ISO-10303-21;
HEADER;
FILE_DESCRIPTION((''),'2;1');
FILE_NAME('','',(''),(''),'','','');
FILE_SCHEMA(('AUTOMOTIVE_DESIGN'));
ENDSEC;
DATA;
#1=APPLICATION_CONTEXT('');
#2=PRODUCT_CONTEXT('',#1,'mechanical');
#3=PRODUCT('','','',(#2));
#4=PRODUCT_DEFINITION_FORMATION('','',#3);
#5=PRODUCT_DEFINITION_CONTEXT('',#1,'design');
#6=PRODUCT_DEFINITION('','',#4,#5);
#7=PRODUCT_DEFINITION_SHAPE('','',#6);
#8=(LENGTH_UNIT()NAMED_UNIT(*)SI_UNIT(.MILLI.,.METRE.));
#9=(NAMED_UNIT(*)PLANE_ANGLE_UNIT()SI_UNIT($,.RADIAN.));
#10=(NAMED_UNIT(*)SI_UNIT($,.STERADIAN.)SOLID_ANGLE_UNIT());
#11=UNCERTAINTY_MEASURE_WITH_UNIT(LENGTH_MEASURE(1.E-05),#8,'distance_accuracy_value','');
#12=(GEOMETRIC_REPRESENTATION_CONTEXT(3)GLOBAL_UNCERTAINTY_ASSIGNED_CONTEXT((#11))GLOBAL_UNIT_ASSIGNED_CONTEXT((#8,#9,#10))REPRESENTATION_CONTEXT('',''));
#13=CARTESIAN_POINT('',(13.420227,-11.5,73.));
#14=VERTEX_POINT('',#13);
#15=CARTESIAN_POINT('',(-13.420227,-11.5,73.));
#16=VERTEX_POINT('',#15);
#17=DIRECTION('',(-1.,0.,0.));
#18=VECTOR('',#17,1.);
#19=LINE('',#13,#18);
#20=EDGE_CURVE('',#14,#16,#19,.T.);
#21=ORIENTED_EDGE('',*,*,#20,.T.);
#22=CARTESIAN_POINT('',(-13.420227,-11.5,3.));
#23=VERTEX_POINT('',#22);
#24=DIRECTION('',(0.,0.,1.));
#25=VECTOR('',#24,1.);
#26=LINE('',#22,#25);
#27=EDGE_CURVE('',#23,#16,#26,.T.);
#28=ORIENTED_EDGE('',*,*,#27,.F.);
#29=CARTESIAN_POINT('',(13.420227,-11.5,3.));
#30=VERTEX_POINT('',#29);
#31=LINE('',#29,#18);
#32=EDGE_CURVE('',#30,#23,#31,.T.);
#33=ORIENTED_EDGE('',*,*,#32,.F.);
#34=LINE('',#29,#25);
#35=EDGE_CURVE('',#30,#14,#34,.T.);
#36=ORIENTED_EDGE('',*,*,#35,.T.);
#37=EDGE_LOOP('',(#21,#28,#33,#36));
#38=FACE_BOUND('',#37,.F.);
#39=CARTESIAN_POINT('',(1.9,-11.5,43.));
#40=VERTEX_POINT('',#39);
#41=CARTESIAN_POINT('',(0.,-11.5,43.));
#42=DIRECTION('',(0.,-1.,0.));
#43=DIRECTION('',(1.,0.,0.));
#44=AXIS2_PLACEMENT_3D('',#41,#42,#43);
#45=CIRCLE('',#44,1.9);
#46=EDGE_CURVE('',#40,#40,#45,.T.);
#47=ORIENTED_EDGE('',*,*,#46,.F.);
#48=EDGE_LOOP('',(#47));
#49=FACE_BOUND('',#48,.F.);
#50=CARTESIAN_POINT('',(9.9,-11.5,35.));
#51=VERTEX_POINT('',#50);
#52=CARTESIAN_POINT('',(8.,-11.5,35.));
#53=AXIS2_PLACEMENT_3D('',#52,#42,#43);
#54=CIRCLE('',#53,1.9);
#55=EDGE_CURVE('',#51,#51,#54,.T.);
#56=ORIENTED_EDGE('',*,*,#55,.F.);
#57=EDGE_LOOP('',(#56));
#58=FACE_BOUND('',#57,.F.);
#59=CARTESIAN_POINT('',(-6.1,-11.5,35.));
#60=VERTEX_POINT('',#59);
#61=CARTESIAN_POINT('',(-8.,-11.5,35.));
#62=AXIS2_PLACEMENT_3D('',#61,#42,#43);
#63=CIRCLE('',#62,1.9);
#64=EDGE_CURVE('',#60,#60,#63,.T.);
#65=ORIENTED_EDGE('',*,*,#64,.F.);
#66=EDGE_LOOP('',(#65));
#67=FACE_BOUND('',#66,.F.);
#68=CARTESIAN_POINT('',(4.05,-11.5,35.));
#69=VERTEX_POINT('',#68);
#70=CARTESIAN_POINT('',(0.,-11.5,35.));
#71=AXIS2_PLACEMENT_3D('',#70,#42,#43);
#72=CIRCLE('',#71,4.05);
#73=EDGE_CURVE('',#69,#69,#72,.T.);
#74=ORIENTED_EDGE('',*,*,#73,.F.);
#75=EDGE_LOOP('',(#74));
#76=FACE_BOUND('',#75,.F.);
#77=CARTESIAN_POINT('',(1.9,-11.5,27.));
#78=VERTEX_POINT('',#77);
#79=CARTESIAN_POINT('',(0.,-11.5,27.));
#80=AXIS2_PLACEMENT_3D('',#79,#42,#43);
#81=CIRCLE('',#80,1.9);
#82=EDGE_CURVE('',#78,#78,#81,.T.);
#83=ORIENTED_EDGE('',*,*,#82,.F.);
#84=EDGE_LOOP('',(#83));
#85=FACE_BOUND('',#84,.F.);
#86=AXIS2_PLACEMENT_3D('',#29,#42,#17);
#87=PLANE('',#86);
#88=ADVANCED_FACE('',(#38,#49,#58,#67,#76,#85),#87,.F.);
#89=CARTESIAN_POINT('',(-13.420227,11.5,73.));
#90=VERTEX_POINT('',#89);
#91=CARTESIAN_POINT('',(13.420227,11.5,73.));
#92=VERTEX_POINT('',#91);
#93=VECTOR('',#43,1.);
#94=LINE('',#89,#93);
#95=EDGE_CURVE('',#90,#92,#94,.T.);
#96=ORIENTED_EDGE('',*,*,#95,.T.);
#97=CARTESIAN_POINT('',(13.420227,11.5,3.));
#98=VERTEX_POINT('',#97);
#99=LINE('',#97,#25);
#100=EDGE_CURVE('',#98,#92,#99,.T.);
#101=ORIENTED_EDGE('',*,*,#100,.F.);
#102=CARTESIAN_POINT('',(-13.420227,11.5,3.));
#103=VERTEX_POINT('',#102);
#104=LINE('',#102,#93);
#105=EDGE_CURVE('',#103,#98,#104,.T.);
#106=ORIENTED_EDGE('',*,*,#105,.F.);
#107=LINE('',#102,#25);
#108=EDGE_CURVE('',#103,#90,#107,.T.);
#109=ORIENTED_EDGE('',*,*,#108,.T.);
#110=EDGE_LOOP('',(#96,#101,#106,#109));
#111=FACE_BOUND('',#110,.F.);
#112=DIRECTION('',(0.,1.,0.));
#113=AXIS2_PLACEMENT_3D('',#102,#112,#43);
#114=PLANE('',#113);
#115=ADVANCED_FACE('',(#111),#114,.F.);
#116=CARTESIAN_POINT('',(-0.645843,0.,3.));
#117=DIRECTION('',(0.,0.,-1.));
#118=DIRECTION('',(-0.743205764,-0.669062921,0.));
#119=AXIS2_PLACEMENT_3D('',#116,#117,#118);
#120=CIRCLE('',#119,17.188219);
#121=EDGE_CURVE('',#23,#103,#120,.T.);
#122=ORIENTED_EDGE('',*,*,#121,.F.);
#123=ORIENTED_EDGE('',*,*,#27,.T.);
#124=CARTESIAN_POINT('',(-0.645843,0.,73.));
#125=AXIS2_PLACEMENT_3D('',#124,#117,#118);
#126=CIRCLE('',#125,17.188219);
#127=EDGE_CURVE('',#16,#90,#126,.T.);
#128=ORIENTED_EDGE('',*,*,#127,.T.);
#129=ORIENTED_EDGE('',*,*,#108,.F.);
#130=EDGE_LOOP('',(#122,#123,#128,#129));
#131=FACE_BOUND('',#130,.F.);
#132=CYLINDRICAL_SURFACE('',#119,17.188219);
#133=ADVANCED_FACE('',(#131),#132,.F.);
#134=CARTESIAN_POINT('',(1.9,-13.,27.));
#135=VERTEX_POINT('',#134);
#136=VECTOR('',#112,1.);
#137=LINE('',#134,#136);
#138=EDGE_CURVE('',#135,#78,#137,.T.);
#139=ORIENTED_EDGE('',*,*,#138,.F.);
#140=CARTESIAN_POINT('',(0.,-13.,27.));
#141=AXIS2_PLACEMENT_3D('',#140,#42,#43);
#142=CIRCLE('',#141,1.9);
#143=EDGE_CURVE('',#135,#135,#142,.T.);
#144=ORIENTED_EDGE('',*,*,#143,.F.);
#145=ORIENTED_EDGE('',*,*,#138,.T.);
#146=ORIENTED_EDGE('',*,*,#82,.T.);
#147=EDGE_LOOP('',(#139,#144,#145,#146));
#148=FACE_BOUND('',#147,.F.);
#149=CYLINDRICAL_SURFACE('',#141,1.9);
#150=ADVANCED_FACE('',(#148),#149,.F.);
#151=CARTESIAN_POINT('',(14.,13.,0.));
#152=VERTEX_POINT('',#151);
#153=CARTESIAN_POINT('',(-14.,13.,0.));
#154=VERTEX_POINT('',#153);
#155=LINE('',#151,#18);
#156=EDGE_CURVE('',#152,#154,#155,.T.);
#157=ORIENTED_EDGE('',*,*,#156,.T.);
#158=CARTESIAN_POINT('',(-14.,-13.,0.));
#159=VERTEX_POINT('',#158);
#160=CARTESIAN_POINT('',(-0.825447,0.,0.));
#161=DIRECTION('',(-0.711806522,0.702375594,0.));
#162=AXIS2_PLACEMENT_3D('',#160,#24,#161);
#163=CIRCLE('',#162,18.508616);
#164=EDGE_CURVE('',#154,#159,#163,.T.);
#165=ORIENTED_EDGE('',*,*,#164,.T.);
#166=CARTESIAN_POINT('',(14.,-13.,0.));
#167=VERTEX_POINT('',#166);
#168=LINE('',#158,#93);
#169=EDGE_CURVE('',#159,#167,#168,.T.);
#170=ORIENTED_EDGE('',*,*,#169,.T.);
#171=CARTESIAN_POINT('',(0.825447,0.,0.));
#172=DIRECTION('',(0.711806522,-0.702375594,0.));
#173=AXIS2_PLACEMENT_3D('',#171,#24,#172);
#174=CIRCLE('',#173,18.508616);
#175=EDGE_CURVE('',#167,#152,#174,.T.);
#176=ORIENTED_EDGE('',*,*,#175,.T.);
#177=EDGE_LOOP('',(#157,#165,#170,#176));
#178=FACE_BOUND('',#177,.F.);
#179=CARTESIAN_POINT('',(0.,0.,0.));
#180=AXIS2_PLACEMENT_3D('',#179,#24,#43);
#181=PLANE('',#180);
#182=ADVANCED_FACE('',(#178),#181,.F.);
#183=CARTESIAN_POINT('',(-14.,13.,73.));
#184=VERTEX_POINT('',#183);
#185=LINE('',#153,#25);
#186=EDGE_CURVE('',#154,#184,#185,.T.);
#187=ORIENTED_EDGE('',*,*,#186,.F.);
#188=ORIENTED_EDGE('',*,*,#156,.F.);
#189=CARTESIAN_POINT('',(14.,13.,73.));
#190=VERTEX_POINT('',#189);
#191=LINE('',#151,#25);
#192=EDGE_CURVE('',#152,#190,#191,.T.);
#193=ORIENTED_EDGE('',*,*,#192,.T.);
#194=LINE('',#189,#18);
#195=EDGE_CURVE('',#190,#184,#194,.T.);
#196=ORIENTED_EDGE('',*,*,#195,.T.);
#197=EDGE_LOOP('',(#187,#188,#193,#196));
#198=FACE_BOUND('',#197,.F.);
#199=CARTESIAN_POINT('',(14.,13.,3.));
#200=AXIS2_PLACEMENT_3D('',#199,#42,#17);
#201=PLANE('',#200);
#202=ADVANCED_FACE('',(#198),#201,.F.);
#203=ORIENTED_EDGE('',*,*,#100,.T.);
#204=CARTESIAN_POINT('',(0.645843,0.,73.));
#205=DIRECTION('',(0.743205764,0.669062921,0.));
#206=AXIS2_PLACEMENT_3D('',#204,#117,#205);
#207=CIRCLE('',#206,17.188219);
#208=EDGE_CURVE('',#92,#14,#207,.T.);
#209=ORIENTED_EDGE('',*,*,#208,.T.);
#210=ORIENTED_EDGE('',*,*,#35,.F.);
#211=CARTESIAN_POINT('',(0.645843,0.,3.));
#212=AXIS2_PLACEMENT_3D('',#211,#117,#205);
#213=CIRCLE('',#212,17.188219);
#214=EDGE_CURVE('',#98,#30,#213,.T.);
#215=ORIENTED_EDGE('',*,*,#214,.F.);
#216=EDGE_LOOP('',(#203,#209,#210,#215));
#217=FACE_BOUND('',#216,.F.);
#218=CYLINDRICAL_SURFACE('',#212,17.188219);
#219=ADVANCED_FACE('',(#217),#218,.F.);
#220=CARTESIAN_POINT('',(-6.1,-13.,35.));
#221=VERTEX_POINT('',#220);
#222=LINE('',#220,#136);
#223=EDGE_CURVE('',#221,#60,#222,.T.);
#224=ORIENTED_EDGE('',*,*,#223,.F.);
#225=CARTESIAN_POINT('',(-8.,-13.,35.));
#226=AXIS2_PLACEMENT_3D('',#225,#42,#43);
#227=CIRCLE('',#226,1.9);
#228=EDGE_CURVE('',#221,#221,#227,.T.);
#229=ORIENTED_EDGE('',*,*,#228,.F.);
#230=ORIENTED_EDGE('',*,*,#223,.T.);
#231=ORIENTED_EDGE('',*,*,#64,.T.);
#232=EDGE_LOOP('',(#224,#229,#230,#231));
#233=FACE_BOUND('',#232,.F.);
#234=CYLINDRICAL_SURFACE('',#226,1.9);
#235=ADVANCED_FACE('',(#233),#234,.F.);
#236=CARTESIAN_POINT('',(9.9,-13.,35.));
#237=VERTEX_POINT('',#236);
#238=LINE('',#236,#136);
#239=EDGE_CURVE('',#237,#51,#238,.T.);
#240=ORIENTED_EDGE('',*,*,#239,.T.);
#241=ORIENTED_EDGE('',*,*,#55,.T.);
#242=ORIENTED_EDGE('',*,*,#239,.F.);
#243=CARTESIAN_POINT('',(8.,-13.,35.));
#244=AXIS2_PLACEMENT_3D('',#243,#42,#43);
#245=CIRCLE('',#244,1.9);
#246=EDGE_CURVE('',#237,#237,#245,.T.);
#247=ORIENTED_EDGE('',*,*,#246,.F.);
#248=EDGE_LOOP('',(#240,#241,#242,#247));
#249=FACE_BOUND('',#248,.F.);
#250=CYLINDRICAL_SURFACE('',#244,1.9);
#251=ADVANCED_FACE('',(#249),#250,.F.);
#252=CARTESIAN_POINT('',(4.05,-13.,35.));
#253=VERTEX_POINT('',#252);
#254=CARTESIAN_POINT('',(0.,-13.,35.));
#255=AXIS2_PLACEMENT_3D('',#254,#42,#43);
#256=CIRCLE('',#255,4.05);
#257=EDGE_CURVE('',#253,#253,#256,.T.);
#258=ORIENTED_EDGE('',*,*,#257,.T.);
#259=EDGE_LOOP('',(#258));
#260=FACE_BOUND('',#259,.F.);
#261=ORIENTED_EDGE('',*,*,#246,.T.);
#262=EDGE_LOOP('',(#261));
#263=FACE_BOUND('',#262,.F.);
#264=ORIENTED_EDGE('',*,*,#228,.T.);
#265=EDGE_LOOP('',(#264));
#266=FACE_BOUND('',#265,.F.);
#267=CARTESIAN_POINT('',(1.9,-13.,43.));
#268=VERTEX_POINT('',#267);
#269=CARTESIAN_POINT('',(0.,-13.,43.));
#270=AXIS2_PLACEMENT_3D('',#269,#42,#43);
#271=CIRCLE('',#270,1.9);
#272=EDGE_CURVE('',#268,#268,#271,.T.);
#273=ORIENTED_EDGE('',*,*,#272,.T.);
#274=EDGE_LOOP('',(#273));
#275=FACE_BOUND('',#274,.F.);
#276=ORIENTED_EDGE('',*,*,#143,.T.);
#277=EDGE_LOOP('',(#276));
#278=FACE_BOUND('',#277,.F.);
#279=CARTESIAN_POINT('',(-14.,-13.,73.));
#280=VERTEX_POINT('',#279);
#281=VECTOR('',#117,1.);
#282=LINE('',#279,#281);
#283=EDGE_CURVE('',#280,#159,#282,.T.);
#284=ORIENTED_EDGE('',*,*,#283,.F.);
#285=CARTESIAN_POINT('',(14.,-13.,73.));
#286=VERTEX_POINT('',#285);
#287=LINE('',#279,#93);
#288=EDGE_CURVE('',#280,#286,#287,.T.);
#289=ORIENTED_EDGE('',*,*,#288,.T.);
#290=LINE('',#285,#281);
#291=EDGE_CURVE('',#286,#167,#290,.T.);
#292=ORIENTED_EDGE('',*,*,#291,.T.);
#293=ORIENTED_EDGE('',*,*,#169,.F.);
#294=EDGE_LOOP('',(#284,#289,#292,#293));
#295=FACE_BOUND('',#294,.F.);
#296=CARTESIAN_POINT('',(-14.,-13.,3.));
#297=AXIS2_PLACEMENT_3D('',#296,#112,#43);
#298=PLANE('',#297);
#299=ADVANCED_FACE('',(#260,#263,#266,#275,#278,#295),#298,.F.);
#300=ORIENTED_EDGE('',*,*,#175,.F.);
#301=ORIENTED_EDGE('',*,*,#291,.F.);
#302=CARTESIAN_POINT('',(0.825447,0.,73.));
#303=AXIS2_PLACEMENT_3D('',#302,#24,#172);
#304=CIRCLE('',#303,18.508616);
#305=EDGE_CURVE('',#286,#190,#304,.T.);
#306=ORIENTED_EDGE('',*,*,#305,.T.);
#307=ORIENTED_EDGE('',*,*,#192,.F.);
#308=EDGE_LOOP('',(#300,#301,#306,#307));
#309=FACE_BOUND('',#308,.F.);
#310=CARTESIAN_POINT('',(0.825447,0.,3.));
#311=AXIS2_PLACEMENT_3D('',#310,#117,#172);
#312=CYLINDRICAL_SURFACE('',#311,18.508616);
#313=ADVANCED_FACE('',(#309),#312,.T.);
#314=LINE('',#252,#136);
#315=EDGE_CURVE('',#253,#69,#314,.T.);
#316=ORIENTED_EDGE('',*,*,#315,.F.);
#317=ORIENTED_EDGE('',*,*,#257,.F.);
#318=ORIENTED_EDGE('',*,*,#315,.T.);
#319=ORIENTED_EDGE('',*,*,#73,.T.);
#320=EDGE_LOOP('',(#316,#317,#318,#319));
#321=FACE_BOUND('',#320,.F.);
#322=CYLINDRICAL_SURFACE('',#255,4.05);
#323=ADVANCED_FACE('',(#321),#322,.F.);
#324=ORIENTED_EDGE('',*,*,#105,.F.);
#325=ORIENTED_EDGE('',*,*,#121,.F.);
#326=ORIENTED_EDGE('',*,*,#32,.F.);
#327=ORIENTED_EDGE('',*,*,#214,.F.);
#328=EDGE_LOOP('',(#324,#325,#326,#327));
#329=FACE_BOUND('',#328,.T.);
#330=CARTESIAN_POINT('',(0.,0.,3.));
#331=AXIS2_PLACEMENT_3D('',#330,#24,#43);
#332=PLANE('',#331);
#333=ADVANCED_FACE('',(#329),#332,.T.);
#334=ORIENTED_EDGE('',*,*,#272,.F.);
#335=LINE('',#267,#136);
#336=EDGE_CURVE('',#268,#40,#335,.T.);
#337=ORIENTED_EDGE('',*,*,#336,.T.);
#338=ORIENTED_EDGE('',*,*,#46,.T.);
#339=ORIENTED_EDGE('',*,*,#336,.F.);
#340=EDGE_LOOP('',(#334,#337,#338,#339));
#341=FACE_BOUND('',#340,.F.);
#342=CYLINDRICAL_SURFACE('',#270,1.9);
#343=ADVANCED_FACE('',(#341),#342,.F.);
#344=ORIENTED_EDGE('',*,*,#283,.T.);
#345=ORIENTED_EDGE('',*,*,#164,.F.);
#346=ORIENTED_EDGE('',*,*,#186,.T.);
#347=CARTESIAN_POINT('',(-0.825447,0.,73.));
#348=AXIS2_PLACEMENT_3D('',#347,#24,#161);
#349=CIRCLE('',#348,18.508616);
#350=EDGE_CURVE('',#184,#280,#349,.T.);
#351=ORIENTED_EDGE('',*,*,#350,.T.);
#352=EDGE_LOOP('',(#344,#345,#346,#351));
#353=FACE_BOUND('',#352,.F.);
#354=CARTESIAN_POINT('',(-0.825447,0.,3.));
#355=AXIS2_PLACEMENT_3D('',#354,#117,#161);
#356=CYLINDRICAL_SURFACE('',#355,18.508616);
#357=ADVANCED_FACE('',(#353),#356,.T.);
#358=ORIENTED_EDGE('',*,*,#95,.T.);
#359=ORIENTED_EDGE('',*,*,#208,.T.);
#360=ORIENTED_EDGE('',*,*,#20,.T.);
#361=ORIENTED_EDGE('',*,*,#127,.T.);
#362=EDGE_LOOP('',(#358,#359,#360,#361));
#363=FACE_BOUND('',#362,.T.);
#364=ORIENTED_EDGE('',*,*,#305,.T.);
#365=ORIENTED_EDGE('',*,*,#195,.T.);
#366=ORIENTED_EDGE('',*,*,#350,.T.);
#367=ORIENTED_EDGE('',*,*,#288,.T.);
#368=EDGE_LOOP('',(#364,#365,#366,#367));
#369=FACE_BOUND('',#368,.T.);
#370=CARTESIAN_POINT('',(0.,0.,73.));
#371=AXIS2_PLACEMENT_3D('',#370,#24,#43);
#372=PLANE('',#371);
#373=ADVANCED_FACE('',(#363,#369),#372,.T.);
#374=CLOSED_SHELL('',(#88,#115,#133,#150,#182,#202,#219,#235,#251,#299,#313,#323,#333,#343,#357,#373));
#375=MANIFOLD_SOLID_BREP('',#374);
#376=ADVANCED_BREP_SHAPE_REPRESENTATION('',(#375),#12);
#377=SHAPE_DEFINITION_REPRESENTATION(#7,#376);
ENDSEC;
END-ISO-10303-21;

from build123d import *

# Parameters (mm, degrees)
F1_DEPTH = 3
F3_DEPTH = 70
F4_R     = 1.9
F4_R_2   = 4.05
F5_DEPTH = 4


# Not quite as in the source:
# - a feature names something its author has since deleted; it is built from what else it names


with BuildPart() as f1:
    # F0 (on Top) → F1 (new body)
    with BuildSketch(Plane.XY):
        with BuildLine():
            Line((14, 13), (-14, 13))
            ThreePointArc((-14, 13), (-19.3340623478, 0), (-14, -13))
            Line((-14, -13), (14, -13))
            ThreePointArc((14, -13), (19.3340623478, 0), (14, 13))
        make_face()
    extrude(amount=F1_DEPTH)

    # F2 (on face) → F3 (join)
    with BuildSketch(Plane.XY.offset(3)):
        with BuildLine():
            ThreePointArc((14, -13), (19.3340623478, 0), (14, 13))
            Line((14, 13), (-14, 13))
            ThreePointArc((-14, 13), (-19.3340623478, 0), (-14, -13))
            Line((-14, -13), (14, -13))
        make_face()
        with BuildLine():
            Line((13.4202267877, -11.5), (-13.4202267877, -11.5))
            ThreePointArc((-13.4202267877, -11.5), (-17.8340623478, 0), (-13.4202267877, 11.5))
            Line((-13.4202267877, 11.5), (13.4202267877, 11.5))
            ThreePointArc((13.4202267877, 11.5), (17.8340623478, 0), (13.4202267877, -11.5))
        make_face(mode=Mode.SUBTRACT)
    extrude(amount=F3_DEPTH)

    # F4 (on face) → F5 (cut)
    with BuildSketch(Plane.XZ.offset(13)):
        with Locations((-8, 35)):
            Circle(F4_R)
        with Locations((0, 35)):
            Circle(F4_R_2)
        with Locations((8, 35)):
            Circle(F4_R)
        with Locations((0, 43)):
            Circle(F4_R)
        with Locations((0, 27)):
            Circle(F4_R)
    extrude(amount=-F5_DEPTH, mode=Mode.SUBTRACT)


solid = f1.part
